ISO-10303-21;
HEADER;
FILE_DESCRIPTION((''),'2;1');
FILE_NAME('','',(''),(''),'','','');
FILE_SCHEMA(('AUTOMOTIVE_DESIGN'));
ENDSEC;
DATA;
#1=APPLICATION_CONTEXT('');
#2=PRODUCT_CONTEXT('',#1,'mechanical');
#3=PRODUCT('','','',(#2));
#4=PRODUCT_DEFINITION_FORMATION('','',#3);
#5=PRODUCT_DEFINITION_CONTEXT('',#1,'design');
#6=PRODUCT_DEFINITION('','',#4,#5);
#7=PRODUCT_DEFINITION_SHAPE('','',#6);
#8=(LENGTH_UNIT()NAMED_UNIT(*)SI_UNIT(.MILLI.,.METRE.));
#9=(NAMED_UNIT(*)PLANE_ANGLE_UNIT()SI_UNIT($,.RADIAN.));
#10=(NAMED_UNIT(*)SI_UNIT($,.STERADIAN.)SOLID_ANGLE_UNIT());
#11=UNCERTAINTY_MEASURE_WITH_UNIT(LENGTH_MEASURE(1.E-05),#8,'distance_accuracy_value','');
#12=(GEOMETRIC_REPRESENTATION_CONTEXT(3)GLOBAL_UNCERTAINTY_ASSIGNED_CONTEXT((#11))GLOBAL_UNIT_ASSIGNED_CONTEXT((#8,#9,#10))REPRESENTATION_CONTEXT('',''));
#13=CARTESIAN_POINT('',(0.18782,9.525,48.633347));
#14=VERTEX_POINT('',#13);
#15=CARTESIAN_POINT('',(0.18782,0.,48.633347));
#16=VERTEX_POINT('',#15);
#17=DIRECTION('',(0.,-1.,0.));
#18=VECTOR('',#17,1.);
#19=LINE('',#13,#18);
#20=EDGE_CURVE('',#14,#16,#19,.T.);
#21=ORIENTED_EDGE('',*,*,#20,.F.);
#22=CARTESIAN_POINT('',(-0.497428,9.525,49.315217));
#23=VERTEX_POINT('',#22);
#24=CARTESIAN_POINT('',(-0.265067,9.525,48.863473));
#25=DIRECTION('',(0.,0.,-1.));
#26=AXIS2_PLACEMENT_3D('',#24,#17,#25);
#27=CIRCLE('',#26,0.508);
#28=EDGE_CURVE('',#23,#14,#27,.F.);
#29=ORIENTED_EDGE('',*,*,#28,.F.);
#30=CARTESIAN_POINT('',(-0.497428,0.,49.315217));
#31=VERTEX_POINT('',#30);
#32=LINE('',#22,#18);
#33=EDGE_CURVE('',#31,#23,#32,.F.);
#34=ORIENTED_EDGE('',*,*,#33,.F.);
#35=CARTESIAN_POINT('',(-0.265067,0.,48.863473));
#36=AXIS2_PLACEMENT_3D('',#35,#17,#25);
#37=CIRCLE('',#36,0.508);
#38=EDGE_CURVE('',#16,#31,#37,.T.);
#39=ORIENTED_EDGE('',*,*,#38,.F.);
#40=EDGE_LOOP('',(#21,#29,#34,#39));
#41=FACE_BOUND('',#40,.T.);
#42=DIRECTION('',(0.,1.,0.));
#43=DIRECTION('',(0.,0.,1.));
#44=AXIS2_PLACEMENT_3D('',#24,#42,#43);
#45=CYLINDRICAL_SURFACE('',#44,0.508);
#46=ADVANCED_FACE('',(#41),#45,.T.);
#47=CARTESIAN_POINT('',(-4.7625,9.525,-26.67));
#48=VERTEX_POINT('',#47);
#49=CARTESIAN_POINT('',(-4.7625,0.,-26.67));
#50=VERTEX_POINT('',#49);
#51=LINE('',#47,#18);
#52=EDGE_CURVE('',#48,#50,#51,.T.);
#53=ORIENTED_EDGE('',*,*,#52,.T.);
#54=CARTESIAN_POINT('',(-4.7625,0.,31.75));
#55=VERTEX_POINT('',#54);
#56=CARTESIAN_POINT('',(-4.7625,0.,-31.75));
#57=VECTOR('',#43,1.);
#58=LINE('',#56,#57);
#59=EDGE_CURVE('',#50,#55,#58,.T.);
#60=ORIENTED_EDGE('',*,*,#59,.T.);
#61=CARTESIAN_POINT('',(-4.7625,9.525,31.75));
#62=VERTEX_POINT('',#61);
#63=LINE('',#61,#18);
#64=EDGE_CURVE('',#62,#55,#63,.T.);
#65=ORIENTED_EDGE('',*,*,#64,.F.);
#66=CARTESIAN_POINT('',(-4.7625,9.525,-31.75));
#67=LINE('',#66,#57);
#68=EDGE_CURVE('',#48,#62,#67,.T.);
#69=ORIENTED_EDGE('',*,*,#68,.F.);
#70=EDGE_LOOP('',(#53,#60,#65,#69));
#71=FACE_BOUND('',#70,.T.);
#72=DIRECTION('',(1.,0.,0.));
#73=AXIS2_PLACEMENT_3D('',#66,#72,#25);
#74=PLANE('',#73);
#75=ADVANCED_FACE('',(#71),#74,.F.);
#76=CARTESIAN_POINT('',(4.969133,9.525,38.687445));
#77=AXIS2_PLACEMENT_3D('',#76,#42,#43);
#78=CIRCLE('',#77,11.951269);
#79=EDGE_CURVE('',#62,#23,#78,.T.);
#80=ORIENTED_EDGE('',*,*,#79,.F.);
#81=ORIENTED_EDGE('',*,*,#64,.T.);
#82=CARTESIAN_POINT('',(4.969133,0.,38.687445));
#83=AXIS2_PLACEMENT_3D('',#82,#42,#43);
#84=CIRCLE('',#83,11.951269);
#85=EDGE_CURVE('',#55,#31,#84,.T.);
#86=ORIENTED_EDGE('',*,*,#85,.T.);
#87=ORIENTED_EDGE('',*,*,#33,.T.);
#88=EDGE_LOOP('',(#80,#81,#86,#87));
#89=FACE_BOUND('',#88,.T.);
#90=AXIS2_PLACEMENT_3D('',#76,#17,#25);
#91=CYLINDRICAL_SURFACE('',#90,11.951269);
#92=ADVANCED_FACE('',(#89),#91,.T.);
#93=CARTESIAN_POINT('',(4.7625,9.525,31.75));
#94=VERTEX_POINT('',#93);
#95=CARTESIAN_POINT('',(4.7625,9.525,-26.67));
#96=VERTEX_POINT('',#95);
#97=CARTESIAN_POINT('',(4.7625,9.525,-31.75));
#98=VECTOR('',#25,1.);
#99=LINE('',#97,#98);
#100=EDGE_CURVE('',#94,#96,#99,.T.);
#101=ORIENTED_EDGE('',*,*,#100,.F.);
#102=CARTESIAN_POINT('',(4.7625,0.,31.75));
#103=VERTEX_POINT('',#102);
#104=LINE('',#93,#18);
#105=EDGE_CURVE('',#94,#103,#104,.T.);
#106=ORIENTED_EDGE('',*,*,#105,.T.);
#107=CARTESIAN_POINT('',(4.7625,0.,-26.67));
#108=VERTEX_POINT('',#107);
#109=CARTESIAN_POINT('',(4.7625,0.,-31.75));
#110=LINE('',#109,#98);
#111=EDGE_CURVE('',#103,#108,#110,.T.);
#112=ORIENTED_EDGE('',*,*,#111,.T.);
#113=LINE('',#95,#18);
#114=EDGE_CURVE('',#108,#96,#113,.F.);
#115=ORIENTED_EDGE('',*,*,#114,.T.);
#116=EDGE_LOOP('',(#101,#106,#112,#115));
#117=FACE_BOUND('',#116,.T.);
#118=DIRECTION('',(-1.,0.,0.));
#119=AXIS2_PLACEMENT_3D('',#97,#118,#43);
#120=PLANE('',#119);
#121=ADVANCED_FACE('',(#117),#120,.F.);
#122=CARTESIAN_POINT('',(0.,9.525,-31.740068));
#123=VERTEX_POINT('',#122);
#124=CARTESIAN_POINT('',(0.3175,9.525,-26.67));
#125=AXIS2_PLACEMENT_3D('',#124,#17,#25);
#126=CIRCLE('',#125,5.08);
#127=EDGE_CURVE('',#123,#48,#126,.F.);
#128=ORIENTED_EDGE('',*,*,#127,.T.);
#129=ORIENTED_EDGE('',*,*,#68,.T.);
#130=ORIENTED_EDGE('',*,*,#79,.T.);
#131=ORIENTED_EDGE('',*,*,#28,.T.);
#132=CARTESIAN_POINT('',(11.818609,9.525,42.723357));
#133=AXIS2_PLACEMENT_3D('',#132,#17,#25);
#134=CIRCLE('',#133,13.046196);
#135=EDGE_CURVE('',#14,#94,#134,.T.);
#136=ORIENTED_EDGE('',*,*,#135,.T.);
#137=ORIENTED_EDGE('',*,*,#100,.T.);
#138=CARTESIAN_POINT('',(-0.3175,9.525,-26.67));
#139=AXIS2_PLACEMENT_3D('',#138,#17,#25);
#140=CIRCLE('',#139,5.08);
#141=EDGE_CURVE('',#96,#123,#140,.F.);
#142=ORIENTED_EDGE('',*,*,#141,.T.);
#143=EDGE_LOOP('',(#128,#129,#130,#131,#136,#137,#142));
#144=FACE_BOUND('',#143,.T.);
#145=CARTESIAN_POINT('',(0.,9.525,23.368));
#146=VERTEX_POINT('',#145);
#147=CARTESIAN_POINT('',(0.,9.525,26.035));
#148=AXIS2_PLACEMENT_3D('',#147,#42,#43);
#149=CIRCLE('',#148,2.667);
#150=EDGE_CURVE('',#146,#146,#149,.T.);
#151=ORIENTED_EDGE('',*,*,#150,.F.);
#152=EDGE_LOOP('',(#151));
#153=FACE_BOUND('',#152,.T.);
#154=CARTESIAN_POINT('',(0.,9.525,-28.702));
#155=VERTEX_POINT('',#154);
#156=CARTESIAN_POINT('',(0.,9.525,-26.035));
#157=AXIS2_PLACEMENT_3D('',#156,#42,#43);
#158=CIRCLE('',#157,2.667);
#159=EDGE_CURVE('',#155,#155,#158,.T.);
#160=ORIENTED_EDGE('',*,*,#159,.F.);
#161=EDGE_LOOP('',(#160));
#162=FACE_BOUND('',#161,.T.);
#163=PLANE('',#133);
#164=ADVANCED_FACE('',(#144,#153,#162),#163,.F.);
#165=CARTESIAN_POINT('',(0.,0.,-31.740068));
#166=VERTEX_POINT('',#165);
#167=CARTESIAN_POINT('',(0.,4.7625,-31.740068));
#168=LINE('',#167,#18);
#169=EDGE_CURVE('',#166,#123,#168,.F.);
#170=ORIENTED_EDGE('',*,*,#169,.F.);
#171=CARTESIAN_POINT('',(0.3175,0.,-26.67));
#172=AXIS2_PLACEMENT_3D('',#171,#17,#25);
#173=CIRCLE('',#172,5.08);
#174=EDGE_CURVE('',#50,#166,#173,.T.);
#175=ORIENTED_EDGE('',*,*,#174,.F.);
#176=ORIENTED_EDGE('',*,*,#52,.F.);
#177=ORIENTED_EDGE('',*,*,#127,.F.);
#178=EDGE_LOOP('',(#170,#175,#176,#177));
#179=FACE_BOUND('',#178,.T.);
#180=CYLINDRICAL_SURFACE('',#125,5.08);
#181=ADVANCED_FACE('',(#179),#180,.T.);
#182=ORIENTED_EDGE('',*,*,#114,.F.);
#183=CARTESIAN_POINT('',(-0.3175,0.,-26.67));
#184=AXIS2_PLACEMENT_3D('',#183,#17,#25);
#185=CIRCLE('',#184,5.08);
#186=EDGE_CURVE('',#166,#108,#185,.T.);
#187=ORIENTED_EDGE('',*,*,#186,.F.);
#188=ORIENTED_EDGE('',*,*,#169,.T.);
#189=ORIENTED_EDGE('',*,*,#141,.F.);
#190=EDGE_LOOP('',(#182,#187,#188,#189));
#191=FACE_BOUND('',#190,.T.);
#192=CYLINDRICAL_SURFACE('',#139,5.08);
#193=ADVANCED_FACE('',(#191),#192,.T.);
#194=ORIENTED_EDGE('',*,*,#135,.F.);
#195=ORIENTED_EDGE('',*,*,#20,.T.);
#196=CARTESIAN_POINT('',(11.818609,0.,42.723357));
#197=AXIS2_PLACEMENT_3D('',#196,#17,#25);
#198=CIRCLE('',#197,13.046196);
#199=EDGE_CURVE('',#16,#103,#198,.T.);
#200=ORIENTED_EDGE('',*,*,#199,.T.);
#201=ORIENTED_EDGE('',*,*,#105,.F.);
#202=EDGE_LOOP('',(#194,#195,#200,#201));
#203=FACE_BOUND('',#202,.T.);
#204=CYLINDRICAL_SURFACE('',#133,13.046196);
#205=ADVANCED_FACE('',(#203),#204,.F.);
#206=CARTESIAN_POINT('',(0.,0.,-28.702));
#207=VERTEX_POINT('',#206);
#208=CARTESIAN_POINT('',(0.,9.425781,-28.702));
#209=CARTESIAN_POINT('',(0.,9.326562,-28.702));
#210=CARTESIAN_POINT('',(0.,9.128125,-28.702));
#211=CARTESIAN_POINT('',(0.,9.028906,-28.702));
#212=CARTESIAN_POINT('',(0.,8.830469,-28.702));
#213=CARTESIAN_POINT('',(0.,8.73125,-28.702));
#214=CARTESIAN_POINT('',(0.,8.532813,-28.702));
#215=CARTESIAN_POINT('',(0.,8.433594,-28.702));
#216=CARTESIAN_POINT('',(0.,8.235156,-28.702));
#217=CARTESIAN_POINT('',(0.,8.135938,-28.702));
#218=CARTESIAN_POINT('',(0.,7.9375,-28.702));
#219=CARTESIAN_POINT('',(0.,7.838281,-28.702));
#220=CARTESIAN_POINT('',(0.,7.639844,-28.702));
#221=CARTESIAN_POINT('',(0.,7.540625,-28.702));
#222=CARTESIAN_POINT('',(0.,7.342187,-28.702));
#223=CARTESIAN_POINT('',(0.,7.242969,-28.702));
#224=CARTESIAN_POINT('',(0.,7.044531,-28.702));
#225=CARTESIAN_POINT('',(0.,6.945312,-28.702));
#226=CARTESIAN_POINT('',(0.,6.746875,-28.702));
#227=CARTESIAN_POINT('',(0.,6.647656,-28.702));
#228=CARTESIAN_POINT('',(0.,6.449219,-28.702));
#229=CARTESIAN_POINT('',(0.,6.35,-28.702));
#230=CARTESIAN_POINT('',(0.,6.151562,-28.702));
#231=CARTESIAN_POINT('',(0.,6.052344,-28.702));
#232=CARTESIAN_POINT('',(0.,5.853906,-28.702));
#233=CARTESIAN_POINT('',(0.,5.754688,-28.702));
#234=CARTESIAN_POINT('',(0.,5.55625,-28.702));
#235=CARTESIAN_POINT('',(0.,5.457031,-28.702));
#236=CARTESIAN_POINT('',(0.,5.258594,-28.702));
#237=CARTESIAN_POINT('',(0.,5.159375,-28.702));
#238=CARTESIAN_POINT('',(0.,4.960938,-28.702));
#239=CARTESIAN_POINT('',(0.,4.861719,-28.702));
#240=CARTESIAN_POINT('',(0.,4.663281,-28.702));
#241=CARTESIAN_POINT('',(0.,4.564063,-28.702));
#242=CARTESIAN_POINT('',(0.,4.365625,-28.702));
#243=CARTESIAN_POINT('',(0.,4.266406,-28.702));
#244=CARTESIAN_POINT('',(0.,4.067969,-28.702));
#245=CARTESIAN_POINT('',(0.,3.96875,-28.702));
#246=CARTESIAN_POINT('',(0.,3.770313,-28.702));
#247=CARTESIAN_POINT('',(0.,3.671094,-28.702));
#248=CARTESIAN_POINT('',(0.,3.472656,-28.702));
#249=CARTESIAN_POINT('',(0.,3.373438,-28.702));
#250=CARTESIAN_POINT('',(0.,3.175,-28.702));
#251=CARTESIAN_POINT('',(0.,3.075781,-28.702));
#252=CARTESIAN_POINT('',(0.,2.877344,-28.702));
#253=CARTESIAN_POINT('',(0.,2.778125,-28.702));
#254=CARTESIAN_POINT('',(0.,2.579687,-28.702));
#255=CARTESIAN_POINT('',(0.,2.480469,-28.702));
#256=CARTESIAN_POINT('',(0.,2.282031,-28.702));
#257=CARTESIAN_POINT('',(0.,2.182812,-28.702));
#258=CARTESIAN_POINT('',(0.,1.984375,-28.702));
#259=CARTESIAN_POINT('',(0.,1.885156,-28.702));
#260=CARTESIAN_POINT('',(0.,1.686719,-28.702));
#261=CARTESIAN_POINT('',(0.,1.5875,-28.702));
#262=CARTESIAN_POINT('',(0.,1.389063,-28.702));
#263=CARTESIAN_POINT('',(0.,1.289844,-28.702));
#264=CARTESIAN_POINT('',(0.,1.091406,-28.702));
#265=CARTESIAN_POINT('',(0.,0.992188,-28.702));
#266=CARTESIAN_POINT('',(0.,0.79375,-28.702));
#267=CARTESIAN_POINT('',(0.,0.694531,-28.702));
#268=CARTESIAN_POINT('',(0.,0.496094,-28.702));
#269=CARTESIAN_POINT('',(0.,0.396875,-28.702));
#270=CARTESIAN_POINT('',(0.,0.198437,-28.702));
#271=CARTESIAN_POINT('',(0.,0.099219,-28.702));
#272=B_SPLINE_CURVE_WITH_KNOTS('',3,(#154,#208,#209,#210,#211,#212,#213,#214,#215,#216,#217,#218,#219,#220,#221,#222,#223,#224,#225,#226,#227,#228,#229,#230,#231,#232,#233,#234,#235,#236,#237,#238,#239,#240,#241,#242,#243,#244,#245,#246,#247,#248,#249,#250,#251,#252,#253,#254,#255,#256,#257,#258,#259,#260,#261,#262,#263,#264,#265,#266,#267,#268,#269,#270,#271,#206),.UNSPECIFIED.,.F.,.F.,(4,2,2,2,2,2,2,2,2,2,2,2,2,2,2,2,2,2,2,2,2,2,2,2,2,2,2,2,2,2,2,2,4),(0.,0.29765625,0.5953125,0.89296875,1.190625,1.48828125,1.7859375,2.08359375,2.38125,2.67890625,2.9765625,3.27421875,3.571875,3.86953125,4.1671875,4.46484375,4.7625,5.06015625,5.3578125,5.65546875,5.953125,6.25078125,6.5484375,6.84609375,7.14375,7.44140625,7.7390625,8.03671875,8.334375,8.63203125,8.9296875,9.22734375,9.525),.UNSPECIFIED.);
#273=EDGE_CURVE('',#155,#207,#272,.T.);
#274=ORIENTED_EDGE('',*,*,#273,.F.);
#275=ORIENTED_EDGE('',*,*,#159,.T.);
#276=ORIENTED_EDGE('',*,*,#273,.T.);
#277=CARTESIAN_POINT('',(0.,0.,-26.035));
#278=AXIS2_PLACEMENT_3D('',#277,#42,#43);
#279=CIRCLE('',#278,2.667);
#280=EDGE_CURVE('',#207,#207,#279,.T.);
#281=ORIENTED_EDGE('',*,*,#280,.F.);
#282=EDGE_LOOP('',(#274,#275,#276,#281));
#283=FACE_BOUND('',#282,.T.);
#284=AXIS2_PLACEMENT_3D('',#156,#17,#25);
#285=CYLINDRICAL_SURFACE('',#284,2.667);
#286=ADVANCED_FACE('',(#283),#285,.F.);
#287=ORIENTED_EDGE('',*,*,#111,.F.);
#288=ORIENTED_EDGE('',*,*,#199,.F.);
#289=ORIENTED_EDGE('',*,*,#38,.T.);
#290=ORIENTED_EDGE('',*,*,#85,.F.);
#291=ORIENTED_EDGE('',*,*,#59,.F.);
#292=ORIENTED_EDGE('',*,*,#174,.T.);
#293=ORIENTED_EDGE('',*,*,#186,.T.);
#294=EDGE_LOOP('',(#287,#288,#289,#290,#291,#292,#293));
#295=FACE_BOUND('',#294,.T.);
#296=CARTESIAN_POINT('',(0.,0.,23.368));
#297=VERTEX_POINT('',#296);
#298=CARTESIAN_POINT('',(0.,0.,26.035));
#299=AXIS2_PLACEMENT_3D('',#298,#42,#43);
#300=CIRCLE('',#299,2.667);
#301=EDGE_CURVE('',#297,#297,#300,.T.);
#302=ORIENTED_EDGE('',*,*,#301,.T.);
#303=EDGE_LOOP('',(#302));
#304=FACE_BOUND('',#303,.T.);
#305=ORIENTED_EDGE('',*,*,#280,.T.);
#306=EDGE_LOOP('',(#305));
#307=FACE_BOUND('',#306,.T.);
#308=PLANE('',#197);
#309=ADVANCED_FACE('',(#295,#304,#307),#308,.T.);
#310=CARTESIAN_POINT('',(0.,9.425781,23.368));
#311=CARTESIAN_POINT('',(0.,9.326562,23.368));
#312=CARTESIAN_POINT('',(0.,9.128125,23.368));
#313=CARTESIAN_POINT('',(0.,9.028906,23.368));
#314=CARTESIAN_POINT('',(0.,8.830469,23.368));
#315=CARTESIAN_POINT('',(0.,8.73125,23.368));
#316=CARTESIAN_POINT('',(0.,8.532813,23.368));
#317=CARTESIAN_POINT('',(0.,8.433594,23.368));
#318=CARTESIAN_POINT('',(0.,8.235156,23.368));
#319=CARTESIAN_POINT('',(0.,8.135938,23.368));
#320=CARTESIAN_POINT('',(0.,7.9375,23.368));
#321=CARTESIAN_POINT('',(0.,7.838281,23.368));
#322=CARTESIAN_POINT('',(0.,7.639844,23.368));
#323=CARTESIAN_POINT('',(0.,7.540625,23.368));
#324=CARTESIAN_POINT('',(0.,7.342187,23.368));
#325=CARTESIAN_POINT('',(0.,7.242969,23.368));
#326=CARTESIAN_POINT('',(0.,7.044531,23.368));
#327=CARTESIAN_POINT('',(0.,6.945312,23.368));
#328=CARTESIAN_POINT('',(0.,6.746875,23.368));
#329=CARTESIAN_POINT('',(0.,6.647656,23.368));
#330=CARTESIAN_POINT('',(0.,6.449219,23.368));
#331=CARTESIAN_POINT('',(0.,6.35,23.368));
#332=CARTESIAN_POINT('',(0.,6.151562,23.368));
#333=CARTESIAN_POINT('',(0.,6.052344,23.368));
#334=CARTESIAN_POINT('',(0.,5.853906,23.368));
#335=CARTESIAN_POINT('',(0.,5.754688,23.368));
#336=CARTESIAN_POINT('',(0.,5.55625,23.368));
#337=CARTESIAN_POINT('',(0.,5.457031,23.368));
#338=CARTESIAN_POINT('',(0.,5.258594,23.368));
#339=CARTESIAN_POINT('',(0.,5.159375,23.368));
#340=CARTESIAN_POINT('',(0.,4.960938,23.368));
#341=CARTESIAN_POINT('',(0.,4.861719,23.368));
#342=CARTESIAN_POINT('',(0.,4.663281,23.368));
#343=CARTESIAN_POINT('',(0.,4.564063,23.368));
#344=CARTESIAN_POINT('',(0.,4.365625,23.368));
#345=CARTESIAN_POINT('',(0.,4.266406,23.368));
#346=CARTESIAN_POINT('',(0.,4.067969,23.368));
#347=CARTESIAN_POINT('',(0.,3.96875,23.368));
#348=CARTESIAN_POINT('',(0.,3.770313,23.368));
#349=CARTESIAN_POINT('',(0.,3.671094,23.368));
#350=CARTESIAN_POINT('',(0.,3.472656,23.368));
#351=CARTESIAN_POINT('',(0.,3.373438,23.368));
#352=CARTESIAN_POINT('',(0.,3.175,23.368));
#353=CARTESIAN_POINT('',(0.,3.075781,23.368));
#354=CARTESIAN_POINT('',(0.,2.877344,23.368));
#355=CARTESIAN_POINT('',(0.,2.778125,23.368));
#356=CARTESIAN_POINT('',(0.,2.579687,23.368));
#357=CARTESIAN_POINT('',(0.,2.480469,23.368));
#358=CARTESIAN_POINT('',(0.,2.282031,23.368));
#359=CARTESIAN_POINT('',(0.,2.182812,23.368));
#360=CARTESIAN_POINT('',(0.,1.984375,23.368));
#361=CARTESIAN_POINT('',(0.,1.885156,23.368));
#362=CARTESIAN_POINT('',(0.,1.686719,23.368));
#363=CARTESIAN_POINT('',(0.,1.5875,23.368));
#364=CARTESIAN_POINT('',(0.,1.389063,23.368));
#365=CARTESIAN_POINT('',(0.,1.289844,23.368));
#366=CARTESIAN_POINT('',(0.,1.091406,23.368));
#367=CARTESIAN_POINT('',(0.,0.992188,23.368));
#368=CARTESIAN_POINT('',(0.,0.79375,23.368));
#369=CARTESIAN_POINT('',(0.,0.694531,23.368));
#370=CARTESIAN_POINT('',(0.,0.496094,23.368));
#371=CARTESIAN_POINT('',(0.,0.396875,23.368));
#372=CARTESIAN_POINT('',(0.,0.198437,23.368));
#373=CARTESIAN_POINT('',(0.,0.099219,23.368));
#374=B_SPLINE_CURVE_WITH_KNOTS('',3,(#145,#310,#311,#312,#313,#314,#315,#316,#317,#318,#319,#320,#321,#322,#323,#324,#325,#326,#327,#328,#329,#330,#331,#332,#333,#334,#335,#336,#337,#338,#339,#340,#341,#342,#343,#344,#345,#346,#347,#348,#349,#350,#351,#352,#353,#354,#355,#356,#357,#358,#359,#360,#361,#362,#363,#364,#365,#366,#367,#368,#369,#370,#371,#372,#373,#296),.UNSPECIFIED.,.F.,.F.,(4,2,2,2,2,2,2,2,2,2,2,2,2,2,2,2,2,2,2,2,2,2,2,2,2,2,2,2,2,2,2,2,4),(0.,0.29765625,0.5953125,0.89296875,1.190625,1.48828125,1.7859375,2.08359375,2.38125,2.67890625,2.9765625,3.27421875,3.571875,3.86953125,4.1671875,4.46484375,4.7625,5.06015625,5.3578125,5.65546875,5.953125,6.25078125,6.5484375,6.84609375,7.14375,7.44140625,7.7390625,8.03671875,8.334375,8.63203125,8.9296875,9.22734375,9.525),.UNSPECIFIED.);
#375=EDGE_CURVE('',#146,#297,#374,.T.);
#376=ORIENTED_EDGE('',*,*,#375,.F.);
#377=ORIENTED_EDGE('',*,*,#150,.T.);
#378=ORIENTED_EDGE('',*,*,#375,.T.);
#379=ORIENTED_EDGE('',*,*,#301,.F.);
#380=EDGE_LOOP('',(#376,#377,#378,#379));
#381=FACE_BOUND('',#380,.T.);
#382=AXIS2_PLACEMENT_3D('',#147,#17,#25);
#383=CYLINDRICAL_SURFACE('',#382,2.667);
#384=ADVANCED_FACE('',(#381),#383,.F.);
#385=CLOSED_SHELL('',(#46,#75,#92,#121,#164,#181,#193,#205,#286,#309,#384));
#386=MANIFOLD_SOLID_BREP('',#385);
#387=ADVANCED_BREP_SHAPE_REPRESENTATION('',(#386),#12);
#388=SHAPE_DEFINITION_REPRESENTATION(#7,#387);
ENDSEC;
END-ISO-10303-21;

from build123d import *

# Parameters (mm, degrees)
SKETCH1_R           = 2.667
BOSS_EXTRUDE1_DEPTH = 9.525
FILLET1_R           = 5.08
FILLET2_R           = 0.508


with BuildPart() as part:
    # Sketch1 → Boss-Extrude1 (new body)
    with BuildSketch(Plane(origin=(0, 0, 0), x_dir=(1, 0, 0), z_dir=(0, 1, 0))):
        with BuildLine():
            Line((-4.7625, 31.75), (4.7625, 31.75))
            Line((4.7625, 31.75), (4.7625, -31.75))
            ThreePointArc((4.7625, -31.75), (-0.950597142, -40.049292778), (0.9525, -49.943531548))
            ThreePointArc((0.9525, -49.943531548), (-6.432834073, -42.269060926), (-4.7625, -31.75))
            Line((-4.7625, -31.75), (-4.7625, 31.75))
        make_face()
        with Locations(Location((0, -26.035, 0), (0, 0, 90))):
            Circle(SKETCH1_R, mode=Mode.SUBTRACT)
        with Locations(Location((0, 26.035, 0), (0, 0, 90))):
            Circle(SKETCH1_R, mode=Mode.SUBTRACT)
    extrude(amount=BOSS_EXTRUDE1_DEPTH)

    # Fillet1
    # the kernel refuses this fillet: 5.08 mm, written as the material it takes off along each edge
    with BuildSketch(Plane(origin=(-4.7625, -12.7, -31.75), x_dir=(0, 0, 1), z_dir=(0, 1, 0)), Plane(origin=(4.7625, -12.7, -31.75), x_dir=(-1, 0, 0), z_dir=(0, 1, 0))) as fillet1_piece_1:
        with BuildLine():
            CenterArc((FILLET1_R, FILLET1_R), FILLET1_R, 180, 90)
            Line((0, FILLET1_R), (0, 0))
            Line((0, 0), (FILLET1_R, 0))
        make_face()
    extrude(amount=34.925, mode=Mode.SUBTRACT)

    # Fillet2
    fillet2_edges = [part.edges().sort_by_distance(p)[0] for p in [
        (0.9525, 4.7625, 49.943531548),
    ]]
    fillet(fillet2_edges, radius=FILLET2_R)


solid = part.part
